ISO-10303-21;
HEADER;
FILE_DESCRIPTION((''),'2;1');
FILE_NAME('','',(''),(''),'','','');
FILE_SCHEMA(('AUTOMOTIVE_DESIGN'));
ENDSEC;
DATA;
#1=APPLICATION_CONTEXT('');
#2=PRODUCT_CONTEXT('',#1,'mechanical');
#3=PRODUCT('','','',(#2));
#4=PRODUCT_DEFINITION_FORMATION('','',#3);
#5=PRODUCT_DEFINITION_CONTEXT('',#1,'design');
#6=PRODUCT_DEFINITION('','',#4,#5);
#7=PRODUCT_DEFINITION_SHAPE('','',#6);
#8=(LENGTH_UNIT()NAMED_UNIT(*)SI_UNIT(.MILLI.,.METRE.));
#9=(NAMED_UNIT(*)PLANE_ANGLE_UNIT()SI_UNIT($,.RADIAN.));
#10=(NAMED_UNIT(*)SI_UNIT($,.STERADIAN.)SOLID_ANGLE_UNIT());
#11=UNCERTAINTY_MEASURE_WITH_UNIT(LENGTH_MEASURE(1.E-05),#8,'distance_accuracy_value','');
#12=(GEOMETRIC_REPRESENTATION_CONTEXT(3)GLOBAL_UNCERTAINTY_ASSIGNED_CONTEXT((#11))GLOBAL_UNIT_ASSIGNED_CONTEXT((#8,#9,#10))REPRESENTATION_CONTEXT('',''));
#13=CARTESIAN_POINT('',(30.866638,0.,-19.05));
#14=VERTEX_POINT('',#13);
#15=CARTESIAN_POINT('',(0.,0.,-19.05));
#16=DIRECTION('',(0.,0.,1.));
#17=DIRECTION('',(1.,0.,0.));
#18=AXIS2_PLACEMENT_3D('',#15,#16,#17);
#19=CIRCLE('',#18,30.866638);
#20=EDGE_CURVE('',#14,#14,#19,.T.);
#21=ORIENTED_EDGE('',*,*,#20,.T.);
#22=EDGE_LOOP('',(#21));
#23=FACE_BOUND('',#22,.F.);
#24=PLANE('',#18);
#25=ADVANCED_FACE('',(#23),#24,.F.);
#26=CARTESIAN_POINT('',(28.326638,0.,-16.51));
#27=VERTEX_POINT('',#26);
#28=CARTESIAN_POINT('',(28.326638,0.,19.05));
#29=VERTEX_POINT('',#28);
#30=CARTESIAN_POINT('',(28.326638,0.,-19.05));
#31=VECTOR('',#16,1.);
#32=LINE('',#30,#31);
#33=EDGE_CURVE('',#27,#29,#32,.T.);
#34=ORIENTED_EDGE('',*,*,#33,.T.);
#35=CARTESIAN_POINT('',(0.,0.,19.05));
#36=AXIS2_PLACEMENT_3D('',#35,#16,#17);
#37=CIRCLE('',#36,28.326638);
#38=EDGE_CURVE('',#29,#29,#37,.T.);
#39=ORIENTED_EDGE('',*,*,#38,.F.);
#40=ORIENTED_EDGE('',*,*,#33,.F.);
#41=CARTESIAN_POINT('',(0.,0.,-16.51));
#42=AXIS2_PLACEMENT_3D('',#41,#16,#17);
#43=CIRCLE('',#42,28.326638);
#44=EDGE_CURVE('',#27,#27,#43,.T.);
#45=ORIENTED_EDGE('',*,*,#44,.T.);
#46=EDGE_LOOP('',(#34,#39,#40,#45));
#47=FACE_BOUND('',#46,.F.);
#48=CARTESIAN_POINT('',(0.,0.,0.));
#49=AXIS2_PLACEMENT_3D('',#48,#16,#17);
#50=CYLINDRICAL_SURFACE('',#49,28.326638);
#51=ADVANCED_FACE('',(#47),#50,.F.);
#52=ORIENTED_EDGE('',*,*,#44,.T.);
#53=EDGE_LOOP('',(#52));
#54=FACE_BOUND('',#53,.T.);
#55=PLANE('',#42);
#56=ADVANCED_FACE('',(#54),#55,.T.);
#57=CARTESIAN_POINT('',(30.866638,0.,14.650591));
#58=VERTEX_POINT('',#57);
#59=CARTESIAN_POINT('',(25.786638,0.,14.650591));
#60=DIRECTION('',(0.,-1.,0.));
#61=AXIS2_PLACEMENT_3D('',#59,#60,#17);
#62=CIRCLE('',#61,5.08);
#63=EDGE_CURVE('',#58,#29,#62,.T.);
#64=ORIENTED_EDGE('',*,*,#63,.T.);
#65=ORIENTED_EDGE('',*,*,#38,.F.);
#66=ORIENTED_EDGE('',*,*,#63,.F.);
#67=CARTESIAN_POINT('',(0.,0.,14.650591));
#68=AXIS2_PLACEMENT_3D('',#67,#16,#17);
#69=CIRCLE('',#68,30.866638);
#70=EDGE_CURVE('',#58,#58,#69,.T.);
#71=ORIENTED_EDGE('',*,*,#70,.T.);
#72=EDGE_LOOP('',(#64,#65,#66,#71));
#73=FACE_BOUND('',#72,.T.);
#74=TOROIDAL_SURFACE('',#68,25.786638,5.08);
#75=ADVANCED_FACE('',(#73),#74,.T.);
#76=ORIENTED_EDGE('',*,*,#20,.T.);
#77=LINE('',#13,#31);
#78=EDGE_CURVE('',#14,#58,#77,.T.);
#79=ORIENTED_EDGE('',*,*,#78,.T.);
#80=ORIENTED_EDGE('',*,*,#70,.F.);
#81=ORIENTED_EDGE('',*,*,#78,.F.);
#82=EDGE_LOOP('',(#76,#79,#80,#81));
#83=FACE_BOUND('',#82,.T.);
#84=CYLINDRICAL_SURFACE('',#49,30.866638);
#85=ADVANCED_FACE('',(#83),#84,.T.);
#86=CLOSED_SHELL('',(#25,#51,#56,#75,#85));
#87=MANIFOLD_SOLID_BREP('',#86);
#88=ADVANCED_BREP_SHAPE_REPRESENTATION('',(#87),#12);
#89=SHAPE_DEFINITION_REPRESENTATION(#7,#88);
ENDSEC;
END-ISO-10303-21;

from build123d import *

# Parameters (mm, degrees)
F0_R     = 30.8666383599
F1_DEPTH = 19.05
F2_T     = -2.54


# Not quite as in the source:
# - a fillet or chamfer that OpenCascade refuses, or shapes differently, is made with other operations: its cross-section is extruded or revolved along the edge and cut away or added


with BuildPart() as f1:
    # F0 (on Top) → F1 (new body, symmetric)
    with BuildSketch(Plane.XY):
        Circle(F0_R)
    extrude(amount=F1_DEPTH, both=True)

    # F2
    f2_openings = [f1.faces().sort_by_distance(p)[0] for p in [
        (0, 0, 19.05),
    ]]
    offset(amount=F2_T, openings=f2_openings)

    # F3: fillet of radius 5.08 on 1 edges, made by hand

    # F3_s1 → F3_t2 (revolve, cut)
    with BuildSketch(Plane.XZ):
        with BuildLine():
            ThreePointArc((30.8666383599, 14.6505909488), (30.1860474111, 17.1905909488), (28.3266383599, 19.05))
            Line((28.3266383599, 19.05), (28.3774383599, 19.137988181))
            ThreePointArc((28.3774383599, 19.137988181), (29.5966383599, 19.1516), (30.8666383599, 19.1516))
            Line((30.8666383599, 19.1516), (30.9682383599, 19.05))
            Line((30.9682383599, 19.05), (30.9682383599, 14.6505909488))
            Line((30.9682383599, 14.6505909488), (30.8666383599, 14.6505909488))
        make_face()
    revolve(axis=Axis((0, 0, 19.05), (0, 0, 1)), mode=Mode.SUBTRACT)


solid = f1.part
